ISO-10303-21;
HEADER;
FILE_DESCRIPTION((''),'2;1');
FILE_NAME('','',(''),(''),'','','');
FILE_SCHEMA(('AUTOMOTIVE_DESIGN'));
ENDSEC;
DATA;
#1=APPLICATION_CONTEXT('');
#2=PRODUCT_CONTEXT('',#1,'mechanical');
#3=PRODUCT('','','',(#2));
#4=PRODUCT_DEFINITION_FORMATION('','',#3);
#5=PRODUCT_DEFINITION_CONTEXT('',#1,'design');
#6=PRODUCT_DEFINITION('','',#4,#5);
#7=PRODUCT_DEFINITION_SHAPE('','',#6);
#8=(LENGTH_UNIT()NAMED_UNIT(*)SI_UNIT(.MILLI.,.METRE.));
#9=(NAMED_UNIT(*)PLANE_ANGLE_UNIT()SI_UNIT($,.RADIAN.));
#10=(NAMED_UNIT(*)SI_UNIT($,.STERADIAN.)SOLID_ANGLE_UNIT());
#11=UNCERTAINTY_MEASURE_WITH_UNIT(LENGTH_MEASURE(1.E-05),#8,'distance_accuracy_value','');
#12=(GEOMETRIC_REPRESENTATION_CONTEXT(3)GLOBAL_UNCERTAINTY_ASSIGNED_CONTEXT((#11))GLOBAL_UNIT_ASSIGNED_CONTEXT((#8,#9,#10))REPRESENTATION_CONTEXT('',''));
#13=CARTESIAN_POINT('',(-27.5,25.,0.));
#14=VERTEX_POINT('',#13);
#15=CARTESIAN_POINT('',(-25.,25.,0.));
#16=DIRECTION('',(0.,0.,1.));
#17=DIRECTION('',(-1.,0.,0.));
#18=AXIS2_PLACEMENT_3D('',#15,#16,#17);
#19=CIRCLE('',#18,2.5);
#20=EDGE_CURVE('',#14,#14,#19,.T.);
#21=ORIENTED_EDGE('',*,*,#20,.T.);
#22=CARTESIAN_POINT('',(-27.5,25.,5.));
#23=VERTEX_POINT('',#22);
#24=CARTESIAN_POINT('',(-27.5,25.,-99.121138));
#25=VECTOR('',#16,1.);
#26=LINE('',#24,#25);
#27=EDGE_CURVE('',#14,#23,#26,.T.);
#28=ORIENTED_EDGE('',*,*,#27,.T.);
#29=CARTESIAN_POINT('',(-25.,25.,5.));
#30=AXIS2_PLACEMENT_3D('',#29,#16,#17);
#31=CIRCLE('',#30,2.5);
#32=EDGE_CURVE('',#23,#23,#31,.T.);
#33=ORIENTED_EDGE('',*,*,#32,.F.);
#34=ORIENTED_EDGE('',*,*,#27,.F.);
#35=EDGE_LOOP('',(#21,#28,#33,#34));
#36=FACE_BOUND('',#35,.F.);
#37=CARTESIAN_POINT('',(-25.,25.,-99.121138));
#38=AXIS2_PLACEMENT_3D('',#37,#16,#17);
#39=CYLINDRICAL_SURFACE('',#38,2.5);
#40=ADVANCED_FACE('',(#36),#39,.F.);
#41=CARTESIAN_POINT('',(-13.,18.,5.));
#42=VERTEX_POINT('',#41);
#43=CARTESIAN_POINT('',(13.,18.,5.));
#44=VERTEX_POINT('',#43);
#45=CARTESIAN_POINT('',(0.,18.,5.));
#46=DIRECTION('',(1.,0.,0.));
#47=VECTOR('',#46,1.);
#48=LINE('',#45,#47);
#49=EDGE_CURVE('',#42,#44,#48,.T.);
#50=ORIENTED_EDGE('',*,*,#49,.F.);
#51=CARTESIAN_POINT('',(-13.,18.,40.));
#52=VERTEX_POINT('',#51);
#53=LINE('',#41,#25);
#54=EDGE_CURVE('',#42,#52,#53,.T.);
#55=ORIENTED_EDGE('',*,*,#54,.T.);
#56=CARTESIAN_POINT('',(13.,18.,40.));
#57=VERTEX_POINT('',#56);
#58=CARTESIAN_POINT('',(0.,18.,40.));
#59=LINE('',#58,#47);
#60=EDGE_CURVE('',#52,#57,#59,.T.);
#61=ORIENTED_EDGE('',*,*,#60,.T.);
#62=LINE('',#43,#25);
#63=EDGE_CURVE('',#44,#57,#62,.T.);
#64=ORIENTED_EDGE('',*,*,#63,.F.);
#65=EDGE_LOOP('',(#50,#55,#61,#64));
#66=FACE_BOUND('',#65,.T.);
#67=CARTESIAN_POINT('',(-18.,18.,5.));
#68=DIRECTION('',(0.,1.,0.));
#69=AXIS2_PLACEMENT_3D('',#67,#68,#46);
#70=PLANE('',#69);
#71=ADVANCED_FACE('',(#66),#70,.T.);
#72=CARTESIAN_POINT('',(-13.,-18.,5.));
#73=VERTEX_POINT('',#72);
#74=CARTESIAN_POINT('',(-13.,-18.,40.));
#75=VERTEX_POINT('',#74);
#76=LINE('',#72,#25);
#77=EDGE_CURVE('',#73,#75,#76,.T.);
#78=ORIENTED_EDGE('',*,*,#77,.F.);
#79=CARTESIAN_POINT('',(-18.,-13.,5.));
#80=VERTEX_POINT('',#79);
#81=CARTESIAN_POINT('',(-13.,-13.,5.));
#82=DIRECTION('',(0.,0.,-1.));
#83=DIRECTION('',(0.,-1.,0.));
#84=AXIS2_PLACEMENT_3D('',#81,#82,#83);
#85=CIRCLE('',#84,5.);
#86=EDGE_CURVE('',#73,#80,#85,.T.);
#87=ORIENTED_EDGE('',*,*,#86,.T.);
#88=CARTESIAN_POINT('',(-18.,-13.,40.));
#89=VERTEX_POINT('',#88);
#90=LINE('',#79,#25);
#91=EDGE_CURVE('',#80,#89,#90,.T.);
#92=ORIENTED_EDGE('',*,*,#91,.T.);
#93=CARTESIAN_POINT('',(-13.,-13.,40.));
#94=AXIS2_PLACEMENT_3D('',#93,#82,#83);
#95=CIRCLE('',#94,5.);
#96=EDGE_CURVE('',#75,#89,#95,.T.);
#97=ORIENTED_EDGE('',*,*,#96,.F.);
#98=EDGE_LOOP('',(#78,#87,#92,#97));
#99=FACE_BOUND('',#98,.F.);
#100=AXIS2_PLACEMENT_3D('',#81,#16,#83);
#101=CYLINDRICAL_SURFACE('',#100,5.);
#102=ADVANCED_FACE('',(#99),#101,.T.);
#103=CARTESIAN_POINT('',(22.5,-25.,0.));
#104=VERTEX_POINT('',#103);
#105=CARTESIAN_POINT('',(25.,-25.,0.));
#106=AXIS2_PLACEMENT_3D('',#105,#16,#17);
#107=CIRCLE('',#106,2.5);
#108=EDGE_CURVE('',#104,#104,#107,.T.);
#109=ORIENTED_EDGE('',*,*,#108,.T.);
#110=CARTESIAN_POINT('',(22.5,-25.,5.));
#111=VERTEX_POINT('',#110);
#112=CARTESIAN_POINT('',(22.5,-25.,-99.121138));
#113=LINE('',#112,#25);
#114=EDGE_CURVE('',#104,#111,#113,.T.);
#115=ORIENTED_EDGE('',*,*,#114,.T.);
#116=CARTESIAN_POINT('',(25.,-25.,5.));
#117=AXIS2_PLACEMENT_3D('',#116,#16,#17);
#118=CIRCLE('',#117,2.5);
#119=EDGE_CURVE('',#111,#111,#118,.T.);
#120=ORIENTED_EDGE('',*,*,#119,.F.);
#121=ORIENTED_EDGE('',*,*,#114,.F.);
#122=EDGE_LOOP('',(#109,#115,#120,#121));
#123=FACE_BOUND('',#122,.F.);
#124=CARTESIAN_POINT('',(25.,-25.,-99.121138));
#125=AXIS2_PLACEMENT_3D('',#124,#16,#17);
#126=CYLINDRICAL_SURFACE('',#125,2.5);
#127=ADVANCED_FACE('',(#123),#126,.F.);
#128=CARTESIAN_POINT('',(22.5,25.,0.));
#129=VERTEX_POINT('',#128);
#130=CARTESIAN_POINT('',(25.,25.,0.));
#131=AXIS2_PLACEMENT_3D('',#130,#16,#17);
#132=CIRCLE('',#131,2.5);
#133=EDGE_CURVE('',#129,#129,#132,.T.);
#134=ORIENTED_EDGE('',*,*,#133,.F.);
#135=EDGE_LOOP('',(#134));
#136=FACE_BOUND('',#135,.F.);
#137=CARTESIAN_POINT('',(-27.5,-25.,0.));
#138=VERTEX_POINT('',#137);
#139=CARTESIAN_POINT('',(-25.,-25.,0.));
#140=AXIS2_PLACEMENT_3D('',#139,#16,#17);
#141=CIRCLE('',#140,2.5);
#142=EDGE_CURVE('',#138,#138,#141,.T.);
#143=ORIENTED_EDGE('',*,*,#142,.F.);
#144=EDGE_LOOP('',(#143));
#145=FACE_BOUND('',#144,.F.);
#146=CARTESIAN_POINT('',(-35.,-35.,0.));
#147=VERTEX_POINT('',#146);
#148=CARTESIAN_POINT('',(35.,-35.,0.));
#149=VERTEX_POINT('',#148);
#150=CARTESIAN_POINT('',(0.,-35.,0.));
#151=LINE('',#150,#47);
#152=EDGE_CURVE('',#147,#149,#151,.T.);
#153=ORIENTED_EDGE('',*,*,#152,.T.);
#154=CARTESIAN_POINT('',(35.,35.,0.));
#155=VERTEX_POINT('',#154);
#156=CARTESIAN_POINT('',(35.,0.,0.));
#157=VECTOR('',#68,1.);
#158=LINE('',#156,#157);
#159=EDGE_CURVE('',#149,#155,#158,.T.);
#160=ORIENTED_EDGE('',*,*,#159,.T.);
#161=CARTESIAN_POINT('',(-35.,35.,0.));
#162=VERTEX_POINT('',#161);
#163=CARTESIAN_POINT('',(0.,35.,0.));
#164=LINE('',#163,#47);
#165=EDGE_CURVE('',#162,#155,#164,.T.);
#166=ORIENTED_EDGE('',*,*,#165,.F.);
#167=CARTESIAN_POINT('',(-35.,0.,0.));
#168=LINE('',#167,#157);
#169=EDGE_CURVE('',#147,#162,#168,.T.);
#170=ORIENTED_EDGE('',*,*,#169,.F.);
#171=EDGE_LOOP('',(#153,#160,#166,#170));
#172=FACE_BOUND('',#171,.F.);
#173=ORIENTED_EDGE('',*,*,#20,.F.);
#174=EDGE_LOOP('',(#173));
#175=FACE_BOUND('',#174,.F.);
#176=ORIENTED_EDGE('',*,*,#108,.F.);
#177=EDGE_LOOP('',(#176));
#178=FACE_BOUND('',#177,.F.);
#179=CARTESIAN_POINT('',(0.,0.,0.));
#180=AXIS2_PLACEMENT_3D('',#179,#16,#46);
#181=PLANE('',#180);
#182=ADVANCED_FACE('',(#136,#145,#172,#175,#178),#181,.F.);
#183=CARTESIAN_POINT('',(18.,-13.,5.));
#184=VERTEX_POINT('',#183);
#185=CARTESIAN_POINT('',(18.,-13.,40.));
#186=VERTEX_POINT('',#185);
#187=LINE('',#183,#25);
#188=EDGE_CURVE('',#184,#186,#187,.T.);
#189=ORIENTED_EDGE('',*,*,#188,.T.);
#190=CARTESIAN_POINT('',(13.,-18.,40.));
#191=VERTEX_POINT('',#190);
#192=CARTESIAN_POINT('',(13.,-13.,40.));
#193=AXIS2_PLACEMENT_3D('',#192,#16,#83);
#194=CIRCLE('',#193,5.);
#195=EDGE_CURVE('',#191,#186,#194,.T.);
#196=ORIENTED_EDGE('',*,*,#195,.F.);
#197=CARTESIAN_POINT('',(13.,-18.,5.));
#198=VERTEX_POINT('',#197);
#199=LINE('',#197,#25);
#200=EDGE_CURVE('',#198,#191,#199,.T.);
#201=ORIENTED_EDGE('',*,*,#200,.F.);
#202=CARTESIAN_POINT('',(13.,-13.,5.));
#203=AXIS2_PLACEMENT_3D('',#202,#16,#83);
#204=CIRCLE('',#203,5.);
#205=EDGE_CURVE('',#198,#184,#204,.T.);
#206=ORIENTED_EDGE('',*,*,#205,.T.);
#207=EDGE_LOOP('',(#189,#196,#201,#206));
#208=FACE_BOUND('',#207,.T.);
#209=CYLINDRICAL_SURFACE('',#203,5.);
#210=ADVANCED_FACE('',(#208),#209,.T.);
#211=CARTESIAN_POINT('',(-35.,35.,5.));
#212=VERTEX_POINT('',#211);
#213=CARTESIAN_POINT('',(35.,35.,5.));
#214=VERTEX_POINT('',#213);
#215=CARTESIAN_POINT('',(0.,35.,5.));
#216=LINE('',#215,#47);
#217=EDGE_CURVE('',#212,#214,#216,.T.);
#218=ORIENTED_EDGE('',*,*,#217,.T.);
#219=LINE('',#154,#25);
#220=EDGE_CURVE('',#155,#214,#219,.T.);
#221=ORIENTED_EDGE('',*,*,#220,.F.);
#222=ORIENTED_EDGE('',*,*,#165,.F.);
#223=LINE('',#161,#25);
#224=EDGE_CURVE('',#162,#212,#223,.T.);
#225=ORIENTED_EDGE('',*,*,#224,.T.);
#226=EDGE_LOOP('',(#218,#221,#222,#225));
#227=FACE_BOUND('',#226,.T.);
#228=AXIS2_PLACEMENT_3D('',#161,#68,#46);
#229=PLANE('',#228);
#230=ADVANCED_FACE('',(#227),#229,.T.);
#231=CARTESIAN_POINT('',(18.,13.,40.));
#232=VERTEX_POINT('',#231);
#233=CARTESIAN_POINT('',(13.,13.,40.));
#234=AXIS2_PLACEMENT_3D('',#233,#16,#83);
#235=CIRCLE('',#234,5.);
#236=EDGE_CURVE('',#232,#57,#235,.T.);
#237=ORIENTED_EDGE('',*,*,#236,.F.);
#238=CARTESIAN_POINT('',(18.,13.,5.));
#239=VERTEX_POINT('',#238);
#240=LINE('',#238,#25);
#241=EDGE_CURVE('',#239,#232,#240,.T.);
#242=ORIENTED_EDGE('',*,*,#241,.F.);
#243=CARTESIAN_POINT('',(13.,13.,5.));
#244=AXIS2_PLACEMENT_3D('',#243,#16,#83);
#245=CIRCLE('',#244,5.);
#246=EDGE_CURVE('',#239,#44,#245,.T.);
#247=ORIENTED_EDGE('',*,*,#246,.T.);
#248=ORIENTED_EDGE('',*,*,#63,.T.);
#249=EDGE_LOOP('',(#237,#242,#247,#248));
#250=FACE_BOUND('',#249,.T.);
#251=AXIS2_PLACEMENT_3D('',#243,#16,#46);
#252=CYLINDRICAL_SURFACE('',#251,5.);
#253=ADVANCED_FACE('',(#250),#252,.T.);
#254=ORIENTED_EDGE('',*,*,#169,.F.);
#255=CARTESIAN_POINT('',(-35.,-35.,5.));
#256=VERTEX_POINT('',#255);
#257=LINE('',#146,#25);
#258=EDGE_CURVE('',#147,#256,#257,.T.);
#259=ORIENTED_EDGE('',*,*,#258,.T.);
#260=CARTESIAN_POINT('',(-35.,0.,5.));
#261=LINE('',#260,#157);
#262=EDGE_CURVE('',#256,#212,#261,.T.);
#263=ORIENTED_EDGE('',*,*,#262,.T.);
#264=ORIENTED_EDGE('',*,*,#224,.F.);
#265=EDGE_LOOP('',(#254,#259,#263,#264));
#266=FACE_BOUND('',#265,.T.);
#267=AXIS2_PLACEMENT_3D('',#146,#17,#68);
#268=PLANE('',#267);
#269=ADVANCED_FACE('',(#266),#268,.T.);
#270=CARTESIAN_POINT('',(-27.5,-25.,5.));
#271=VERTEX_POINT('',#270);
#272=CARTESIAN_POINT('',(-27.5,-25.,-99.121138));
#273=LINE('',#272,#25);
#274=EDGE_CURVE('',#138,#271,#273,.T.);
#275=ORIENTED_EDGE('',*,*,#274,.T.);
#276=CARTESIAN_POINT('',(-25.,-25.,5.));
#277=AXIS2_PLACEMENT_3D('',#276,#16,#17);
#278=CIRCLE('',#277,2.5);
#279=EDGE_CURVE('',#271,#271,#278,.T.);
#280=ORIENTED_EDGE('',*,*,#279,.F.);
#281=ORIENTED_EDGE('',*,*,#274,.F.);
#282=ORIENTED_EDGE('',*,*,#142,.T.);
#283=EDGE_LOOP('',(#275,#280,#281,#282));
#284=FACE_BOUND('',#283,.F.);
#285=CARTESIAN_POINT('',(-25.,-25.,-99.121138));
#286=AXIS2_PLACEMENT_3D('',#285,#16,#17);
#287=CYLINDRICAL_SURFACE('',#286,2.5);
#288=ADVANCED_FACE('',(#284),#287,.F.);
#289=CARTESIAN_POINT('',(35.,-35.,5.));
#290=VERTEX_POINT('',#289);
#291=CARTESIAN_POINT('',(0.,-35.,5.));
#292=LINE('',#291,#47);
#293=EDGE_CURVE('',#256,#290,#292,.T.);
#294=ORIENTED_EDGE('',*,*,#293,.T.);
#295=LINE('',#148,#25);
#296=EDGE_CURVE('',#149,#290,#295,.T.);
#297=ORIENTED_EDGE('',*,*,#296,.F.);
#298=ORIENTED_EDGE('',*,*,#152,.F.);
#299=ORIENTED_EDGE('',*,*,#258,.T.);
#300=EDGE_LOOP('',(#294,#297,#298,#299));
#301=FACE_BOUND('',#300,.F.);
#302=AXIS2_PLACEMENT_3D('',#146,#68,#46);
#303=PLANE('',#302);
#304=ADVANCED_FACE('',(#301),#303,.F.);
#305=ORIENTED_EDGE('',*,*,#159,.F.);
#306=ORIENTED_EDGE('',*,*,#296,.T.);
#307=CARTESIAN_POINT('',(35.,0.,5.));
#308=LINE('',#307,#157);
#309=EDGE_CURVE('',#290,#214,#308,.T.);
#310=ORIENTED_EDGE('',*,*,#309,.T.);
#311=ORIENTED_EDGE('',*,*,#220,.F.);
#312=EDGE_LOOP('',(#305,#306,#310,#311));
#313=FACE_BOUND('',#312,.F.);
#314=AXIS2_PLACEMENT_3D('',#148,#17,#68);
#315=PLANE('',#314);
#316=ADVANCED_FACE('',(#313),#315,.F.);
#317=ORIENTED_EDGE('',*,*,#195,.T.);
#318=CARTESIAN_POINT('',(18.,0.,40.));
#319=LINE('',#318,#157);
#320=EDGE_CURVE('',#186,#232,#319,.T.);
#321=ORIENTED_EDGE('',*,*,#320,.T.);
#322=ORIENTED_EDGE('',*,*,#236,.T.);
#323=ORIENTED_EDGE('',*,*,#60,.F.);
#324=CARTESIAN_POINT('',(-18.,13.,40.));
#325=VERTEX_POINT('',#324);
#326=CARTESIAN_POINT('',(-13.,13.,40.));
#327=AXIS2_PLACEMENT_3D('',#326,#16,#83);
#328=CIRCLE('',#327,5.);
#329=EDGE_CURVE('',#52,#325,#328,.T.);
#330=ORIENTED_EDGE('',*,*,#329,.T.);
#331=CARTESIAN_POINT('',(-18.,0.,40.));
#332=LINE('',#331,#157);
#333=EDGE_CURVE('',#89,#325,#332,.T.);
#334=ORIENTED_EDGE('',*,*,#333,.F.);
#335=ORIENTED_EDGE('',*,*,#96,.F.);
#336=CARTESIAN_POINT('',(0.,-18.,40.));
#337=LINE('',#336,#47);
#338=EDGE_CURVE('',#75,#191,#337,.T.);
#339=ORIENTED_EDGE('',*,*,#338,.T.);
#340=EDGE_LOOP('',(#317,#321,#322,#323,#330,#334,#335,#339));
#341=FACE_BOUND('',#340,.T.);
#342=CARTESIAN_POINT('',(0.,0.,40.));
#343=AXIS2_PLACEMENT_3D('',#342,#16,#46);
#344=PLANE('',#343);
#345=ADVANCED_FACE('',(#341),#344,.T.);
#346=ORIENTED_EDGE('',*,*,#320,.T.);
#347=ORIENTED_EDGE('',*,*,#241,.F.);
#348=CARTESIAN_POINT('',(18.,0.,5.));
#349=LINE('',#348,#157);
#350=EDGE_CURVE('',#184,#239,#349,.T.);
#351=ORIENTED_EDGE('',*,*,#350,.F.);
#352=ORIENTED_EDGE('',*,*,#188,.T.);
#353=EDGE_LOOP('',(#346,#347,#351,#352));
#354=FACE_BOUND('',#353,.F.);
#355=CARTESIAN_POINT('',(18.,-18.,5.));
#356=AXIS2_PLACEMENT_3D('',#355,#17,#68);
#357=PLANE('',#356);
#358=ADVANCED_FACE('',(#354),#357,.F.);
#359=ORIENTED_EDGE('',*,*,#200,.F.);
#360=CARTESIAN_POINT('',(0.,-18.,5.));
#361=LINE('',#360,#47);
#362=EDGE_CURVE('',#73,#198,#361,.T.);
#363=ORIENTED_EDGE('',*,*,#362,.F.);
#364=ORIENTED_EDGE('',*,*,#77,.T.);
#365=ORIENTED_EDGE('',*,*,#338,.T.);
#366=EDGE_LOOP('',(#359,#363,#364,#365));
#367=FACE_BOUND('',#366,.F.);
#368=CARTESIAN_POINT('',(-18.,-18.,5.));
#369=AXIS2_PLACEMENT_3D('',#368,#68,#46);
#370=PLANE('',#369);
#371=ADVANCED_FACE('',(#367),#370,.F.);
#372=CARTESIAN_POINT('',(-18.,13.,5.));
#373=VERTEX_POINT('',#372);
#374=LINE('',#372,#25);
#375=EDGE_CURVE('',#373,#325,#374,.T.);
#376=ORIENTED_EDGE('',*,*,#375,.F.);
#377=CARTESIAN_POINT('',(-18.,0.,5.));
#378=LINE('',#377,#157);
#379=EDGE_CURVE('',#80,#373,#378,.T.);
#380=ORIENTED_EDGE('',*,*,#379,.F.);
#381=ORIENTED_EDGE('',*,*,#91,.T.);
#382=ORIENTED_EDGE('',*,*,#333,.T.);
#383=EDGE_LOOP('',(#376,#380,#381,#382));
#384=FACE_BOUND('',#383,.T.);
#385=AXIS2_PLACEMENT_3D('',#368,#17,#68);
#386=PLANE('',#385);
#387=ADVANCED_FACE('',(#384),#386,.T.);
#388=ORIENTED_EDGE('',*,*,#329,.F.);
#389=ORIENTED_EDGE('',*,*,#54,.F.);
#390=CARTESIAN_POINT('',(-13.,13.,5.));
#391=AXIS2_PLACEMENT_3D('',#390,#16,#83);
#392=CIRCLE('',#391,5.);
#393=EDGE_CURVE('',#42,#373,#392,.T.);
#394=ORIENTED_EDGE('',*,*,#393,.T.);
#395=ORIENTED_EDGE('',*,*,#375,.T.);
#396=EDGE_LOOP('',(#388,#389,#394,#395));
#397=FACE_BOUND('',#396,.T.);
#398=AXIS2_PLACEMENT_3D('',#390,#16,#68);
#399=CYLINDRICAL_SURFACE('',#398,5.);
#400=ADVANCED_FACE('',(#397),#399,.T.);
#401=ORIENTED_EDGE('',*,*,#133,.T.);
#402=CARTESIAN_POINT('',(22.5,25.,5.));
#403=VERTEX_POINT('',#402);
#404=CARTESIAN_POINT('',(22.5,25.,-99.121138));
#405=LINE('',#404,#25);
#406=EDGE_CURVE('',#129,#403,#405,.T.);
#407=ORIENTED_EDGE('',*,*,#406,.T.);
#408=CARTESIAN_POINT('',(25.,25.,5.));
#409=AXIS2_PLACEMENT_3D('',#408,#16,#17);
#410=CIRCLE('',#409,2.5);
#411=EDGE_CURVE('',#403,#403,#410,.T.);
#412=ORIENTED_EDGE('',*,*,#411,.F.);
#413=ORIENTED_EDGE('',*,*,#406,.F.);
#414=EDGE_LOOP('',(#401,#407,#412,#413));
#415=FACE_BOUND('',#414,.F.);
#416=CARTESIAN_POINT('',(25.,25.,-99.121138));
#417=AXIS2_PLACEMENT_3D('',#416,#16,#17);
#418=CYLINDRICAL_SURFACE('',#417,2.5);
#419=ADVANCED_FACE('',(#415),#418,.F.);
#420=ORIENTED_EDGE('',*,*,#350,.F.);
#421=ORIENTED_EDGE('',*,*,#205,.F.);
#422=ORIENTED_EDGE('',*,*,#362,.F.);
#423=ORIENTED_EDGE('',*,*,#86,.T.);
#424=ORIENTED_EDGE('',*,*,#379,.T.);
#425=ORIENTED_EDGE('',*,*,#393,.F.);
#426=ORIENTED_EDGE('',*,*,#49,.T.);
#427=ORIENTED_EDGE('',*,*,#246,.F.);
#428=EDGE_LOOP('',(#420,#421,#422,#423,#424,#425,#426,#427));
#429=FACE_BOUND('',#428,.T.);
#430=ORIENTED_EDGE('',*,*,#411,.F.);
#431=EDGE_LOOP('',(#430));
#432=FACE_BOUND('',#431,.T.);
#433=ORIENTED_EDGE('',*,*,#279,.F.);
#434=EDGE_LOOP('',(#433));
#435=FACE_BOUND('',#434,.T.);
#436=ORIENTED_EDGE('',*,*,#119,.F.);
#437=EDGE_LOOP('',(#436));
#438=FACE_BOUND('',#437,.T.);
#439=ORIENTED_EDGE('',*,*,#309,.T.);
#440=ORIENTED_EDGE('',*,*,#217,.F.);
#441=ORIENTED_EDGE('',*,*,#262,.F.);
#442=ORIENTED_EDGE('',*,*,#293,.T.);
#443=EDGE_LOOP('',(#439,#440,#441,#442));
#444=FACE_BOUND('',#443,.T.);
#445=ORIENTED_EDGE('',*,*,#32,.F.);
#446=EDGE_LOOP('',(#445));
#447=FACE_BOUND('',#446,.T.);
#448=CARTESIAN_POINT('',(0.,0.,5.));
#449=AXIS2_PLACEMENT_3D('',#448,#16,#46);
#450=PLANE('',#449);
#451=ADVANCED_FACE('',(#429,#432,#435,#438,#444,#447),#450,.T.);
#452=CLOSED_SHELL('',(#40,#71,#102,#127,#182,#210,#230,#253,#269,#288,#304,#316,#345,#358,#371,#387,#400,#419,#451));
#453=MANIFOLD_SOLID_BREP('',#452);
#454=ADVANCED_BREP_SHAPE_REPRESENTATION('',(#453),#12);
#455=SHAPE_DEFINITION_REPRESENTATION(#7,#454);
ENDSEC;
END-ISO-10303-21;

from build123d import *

# Parameters (mm, degrees)
F0_W     = 70
F0_H     = 70
F1_DEPTH = 5
F2_D     = 5
F3_W     = 36
F3_H     = 36
F4_DEPTH = 35
F5_R     = 5


# Not quite as in the source:
# - a feature names something its author has since deleted; it is built from what else it names


with BuildPart() as f1:
    # F0 (on Top) → F1 (new body)
    with BuildSketch(Plane.XY):
        Rectangle(F0_W, F0_H)
    extrude(amount=F1_DEPTH)

    # F2 (through all)
    with Locations(Plane(origin=(0, 0, 0), x_dir=(1, 0, 0), z_dir=(0, 0, -1))):
        with Locations((-25, -25), (25, -25), (25, 25), (-25, 25)):
            Hole(F2_D / 2)

    # F3 (on face) → F4 (join)
    with BuildSketch(Plane.XY.offset(5)):
        Rectangle(F3_W, F3_H)
    extrude(amount=F4_DEPTH)

    # F5
    f5_edges = [f1.edges().sort_by_distance(p)[0] for p in [
        (-18, 18, 22.5),
        (-18, -18, 22.5),
        (18, -18, 22.5),
        (18, 18, 22.5),
    ]]
    fillet(f5_edges, radius=F5_R)


solid = f1.part
